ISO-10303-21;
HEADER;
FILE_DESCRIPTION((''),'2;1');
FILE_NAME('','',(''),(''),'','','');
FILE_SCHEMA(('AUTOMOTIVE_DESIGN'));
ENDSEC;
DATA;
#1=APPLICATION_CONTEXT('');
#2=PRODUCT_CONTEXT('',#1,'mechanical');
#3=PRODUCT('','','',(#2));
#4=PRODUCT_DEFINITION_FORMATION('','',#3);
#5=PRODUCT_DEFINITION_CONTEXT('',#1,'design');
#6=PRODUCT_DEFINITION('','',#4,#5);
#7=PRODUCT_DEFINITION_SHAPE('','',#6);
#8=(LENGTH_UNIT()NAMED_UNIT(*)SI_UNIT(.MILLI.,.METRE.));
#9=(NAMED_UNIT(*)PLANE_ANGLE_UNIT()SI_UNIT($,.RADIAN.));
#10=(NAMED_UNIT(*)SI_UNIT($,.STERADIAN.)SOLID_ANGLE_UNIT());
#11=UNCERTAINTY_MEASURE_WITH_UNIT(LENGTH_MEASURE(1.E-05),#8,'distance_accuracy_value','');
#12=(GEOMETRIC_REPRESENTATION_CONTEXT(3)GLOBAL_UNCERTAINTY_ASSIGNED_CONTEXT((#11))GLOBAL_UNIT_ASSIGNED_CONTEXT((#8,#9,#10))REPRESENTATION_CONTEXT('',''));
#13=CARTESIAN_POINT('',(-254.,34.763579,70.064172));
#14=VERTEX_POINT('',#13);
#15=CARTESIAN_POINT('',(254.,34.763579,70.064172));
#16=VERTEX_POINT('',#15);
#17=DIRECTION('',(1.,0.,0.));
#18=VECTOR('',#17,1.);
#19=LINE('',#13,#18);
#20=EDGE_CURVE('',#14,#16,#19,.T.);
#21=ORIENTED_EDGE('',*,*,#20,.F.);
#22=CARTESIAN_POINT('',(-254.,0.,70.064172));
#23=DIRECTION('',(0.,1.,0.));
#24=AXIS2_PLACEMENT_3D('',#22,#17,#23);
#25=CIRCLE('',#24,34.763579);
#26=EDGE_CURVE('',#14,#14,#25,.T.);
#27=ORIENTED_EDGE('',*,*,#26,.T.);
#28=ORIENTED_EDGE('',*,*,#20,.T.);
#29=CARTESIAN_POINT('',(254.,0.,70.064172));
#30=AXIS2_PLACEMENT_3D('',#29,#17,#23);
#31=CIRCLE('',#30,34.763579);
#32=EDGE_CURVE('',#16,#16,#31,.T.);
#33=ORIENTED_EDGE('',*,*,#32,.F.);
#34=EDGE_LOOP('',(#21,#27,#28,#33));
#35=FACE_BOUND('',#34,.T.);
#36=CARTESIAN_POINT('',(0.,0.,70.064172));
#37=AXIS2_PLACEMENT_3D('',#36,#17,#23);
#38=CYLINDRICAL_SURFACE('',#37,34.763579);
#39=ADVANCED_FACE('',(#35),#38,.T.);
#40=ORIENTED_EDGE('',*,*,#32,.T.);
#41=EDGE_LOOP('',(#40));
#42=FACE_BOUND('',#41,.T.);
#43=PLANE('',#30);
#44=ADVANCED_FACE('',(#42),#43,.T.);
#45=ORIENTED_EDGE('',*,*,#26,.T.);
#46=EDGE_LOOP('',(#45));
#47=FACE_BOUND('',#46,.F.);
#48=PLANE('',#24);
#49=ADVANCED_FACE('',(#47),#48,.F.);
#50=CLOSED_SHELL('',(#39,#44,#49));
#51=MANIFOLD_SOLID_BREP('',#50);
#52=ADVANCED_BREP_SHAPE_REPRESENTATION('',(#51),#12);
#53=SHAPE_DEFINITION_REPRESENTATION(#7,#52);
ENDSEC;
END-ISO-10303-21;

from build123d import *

# Parameters (mm, degrees)
F3_R          = 34.7635785501
F4_DEPTH      = 254
F4_DEPTH_BACK = 254


# Not quite as in the source:
# - the program builds the solid bodies; features that only make, move or delete a surface that nothing else refers to are left out


with BuildPart() as f4:
    # F3 (on face) → F4 (new body, two sides)
    with BuildSketch(Plane.YZ) as f4_sk:
        with Locations((0, 70.0641721487)):
            Circle(F3_R)
    extrude(amount=F4_DEPTH)
    extrude(f4_sk.sketch, amount=-F4_DEPTH_BACK)


solid = f4.part
